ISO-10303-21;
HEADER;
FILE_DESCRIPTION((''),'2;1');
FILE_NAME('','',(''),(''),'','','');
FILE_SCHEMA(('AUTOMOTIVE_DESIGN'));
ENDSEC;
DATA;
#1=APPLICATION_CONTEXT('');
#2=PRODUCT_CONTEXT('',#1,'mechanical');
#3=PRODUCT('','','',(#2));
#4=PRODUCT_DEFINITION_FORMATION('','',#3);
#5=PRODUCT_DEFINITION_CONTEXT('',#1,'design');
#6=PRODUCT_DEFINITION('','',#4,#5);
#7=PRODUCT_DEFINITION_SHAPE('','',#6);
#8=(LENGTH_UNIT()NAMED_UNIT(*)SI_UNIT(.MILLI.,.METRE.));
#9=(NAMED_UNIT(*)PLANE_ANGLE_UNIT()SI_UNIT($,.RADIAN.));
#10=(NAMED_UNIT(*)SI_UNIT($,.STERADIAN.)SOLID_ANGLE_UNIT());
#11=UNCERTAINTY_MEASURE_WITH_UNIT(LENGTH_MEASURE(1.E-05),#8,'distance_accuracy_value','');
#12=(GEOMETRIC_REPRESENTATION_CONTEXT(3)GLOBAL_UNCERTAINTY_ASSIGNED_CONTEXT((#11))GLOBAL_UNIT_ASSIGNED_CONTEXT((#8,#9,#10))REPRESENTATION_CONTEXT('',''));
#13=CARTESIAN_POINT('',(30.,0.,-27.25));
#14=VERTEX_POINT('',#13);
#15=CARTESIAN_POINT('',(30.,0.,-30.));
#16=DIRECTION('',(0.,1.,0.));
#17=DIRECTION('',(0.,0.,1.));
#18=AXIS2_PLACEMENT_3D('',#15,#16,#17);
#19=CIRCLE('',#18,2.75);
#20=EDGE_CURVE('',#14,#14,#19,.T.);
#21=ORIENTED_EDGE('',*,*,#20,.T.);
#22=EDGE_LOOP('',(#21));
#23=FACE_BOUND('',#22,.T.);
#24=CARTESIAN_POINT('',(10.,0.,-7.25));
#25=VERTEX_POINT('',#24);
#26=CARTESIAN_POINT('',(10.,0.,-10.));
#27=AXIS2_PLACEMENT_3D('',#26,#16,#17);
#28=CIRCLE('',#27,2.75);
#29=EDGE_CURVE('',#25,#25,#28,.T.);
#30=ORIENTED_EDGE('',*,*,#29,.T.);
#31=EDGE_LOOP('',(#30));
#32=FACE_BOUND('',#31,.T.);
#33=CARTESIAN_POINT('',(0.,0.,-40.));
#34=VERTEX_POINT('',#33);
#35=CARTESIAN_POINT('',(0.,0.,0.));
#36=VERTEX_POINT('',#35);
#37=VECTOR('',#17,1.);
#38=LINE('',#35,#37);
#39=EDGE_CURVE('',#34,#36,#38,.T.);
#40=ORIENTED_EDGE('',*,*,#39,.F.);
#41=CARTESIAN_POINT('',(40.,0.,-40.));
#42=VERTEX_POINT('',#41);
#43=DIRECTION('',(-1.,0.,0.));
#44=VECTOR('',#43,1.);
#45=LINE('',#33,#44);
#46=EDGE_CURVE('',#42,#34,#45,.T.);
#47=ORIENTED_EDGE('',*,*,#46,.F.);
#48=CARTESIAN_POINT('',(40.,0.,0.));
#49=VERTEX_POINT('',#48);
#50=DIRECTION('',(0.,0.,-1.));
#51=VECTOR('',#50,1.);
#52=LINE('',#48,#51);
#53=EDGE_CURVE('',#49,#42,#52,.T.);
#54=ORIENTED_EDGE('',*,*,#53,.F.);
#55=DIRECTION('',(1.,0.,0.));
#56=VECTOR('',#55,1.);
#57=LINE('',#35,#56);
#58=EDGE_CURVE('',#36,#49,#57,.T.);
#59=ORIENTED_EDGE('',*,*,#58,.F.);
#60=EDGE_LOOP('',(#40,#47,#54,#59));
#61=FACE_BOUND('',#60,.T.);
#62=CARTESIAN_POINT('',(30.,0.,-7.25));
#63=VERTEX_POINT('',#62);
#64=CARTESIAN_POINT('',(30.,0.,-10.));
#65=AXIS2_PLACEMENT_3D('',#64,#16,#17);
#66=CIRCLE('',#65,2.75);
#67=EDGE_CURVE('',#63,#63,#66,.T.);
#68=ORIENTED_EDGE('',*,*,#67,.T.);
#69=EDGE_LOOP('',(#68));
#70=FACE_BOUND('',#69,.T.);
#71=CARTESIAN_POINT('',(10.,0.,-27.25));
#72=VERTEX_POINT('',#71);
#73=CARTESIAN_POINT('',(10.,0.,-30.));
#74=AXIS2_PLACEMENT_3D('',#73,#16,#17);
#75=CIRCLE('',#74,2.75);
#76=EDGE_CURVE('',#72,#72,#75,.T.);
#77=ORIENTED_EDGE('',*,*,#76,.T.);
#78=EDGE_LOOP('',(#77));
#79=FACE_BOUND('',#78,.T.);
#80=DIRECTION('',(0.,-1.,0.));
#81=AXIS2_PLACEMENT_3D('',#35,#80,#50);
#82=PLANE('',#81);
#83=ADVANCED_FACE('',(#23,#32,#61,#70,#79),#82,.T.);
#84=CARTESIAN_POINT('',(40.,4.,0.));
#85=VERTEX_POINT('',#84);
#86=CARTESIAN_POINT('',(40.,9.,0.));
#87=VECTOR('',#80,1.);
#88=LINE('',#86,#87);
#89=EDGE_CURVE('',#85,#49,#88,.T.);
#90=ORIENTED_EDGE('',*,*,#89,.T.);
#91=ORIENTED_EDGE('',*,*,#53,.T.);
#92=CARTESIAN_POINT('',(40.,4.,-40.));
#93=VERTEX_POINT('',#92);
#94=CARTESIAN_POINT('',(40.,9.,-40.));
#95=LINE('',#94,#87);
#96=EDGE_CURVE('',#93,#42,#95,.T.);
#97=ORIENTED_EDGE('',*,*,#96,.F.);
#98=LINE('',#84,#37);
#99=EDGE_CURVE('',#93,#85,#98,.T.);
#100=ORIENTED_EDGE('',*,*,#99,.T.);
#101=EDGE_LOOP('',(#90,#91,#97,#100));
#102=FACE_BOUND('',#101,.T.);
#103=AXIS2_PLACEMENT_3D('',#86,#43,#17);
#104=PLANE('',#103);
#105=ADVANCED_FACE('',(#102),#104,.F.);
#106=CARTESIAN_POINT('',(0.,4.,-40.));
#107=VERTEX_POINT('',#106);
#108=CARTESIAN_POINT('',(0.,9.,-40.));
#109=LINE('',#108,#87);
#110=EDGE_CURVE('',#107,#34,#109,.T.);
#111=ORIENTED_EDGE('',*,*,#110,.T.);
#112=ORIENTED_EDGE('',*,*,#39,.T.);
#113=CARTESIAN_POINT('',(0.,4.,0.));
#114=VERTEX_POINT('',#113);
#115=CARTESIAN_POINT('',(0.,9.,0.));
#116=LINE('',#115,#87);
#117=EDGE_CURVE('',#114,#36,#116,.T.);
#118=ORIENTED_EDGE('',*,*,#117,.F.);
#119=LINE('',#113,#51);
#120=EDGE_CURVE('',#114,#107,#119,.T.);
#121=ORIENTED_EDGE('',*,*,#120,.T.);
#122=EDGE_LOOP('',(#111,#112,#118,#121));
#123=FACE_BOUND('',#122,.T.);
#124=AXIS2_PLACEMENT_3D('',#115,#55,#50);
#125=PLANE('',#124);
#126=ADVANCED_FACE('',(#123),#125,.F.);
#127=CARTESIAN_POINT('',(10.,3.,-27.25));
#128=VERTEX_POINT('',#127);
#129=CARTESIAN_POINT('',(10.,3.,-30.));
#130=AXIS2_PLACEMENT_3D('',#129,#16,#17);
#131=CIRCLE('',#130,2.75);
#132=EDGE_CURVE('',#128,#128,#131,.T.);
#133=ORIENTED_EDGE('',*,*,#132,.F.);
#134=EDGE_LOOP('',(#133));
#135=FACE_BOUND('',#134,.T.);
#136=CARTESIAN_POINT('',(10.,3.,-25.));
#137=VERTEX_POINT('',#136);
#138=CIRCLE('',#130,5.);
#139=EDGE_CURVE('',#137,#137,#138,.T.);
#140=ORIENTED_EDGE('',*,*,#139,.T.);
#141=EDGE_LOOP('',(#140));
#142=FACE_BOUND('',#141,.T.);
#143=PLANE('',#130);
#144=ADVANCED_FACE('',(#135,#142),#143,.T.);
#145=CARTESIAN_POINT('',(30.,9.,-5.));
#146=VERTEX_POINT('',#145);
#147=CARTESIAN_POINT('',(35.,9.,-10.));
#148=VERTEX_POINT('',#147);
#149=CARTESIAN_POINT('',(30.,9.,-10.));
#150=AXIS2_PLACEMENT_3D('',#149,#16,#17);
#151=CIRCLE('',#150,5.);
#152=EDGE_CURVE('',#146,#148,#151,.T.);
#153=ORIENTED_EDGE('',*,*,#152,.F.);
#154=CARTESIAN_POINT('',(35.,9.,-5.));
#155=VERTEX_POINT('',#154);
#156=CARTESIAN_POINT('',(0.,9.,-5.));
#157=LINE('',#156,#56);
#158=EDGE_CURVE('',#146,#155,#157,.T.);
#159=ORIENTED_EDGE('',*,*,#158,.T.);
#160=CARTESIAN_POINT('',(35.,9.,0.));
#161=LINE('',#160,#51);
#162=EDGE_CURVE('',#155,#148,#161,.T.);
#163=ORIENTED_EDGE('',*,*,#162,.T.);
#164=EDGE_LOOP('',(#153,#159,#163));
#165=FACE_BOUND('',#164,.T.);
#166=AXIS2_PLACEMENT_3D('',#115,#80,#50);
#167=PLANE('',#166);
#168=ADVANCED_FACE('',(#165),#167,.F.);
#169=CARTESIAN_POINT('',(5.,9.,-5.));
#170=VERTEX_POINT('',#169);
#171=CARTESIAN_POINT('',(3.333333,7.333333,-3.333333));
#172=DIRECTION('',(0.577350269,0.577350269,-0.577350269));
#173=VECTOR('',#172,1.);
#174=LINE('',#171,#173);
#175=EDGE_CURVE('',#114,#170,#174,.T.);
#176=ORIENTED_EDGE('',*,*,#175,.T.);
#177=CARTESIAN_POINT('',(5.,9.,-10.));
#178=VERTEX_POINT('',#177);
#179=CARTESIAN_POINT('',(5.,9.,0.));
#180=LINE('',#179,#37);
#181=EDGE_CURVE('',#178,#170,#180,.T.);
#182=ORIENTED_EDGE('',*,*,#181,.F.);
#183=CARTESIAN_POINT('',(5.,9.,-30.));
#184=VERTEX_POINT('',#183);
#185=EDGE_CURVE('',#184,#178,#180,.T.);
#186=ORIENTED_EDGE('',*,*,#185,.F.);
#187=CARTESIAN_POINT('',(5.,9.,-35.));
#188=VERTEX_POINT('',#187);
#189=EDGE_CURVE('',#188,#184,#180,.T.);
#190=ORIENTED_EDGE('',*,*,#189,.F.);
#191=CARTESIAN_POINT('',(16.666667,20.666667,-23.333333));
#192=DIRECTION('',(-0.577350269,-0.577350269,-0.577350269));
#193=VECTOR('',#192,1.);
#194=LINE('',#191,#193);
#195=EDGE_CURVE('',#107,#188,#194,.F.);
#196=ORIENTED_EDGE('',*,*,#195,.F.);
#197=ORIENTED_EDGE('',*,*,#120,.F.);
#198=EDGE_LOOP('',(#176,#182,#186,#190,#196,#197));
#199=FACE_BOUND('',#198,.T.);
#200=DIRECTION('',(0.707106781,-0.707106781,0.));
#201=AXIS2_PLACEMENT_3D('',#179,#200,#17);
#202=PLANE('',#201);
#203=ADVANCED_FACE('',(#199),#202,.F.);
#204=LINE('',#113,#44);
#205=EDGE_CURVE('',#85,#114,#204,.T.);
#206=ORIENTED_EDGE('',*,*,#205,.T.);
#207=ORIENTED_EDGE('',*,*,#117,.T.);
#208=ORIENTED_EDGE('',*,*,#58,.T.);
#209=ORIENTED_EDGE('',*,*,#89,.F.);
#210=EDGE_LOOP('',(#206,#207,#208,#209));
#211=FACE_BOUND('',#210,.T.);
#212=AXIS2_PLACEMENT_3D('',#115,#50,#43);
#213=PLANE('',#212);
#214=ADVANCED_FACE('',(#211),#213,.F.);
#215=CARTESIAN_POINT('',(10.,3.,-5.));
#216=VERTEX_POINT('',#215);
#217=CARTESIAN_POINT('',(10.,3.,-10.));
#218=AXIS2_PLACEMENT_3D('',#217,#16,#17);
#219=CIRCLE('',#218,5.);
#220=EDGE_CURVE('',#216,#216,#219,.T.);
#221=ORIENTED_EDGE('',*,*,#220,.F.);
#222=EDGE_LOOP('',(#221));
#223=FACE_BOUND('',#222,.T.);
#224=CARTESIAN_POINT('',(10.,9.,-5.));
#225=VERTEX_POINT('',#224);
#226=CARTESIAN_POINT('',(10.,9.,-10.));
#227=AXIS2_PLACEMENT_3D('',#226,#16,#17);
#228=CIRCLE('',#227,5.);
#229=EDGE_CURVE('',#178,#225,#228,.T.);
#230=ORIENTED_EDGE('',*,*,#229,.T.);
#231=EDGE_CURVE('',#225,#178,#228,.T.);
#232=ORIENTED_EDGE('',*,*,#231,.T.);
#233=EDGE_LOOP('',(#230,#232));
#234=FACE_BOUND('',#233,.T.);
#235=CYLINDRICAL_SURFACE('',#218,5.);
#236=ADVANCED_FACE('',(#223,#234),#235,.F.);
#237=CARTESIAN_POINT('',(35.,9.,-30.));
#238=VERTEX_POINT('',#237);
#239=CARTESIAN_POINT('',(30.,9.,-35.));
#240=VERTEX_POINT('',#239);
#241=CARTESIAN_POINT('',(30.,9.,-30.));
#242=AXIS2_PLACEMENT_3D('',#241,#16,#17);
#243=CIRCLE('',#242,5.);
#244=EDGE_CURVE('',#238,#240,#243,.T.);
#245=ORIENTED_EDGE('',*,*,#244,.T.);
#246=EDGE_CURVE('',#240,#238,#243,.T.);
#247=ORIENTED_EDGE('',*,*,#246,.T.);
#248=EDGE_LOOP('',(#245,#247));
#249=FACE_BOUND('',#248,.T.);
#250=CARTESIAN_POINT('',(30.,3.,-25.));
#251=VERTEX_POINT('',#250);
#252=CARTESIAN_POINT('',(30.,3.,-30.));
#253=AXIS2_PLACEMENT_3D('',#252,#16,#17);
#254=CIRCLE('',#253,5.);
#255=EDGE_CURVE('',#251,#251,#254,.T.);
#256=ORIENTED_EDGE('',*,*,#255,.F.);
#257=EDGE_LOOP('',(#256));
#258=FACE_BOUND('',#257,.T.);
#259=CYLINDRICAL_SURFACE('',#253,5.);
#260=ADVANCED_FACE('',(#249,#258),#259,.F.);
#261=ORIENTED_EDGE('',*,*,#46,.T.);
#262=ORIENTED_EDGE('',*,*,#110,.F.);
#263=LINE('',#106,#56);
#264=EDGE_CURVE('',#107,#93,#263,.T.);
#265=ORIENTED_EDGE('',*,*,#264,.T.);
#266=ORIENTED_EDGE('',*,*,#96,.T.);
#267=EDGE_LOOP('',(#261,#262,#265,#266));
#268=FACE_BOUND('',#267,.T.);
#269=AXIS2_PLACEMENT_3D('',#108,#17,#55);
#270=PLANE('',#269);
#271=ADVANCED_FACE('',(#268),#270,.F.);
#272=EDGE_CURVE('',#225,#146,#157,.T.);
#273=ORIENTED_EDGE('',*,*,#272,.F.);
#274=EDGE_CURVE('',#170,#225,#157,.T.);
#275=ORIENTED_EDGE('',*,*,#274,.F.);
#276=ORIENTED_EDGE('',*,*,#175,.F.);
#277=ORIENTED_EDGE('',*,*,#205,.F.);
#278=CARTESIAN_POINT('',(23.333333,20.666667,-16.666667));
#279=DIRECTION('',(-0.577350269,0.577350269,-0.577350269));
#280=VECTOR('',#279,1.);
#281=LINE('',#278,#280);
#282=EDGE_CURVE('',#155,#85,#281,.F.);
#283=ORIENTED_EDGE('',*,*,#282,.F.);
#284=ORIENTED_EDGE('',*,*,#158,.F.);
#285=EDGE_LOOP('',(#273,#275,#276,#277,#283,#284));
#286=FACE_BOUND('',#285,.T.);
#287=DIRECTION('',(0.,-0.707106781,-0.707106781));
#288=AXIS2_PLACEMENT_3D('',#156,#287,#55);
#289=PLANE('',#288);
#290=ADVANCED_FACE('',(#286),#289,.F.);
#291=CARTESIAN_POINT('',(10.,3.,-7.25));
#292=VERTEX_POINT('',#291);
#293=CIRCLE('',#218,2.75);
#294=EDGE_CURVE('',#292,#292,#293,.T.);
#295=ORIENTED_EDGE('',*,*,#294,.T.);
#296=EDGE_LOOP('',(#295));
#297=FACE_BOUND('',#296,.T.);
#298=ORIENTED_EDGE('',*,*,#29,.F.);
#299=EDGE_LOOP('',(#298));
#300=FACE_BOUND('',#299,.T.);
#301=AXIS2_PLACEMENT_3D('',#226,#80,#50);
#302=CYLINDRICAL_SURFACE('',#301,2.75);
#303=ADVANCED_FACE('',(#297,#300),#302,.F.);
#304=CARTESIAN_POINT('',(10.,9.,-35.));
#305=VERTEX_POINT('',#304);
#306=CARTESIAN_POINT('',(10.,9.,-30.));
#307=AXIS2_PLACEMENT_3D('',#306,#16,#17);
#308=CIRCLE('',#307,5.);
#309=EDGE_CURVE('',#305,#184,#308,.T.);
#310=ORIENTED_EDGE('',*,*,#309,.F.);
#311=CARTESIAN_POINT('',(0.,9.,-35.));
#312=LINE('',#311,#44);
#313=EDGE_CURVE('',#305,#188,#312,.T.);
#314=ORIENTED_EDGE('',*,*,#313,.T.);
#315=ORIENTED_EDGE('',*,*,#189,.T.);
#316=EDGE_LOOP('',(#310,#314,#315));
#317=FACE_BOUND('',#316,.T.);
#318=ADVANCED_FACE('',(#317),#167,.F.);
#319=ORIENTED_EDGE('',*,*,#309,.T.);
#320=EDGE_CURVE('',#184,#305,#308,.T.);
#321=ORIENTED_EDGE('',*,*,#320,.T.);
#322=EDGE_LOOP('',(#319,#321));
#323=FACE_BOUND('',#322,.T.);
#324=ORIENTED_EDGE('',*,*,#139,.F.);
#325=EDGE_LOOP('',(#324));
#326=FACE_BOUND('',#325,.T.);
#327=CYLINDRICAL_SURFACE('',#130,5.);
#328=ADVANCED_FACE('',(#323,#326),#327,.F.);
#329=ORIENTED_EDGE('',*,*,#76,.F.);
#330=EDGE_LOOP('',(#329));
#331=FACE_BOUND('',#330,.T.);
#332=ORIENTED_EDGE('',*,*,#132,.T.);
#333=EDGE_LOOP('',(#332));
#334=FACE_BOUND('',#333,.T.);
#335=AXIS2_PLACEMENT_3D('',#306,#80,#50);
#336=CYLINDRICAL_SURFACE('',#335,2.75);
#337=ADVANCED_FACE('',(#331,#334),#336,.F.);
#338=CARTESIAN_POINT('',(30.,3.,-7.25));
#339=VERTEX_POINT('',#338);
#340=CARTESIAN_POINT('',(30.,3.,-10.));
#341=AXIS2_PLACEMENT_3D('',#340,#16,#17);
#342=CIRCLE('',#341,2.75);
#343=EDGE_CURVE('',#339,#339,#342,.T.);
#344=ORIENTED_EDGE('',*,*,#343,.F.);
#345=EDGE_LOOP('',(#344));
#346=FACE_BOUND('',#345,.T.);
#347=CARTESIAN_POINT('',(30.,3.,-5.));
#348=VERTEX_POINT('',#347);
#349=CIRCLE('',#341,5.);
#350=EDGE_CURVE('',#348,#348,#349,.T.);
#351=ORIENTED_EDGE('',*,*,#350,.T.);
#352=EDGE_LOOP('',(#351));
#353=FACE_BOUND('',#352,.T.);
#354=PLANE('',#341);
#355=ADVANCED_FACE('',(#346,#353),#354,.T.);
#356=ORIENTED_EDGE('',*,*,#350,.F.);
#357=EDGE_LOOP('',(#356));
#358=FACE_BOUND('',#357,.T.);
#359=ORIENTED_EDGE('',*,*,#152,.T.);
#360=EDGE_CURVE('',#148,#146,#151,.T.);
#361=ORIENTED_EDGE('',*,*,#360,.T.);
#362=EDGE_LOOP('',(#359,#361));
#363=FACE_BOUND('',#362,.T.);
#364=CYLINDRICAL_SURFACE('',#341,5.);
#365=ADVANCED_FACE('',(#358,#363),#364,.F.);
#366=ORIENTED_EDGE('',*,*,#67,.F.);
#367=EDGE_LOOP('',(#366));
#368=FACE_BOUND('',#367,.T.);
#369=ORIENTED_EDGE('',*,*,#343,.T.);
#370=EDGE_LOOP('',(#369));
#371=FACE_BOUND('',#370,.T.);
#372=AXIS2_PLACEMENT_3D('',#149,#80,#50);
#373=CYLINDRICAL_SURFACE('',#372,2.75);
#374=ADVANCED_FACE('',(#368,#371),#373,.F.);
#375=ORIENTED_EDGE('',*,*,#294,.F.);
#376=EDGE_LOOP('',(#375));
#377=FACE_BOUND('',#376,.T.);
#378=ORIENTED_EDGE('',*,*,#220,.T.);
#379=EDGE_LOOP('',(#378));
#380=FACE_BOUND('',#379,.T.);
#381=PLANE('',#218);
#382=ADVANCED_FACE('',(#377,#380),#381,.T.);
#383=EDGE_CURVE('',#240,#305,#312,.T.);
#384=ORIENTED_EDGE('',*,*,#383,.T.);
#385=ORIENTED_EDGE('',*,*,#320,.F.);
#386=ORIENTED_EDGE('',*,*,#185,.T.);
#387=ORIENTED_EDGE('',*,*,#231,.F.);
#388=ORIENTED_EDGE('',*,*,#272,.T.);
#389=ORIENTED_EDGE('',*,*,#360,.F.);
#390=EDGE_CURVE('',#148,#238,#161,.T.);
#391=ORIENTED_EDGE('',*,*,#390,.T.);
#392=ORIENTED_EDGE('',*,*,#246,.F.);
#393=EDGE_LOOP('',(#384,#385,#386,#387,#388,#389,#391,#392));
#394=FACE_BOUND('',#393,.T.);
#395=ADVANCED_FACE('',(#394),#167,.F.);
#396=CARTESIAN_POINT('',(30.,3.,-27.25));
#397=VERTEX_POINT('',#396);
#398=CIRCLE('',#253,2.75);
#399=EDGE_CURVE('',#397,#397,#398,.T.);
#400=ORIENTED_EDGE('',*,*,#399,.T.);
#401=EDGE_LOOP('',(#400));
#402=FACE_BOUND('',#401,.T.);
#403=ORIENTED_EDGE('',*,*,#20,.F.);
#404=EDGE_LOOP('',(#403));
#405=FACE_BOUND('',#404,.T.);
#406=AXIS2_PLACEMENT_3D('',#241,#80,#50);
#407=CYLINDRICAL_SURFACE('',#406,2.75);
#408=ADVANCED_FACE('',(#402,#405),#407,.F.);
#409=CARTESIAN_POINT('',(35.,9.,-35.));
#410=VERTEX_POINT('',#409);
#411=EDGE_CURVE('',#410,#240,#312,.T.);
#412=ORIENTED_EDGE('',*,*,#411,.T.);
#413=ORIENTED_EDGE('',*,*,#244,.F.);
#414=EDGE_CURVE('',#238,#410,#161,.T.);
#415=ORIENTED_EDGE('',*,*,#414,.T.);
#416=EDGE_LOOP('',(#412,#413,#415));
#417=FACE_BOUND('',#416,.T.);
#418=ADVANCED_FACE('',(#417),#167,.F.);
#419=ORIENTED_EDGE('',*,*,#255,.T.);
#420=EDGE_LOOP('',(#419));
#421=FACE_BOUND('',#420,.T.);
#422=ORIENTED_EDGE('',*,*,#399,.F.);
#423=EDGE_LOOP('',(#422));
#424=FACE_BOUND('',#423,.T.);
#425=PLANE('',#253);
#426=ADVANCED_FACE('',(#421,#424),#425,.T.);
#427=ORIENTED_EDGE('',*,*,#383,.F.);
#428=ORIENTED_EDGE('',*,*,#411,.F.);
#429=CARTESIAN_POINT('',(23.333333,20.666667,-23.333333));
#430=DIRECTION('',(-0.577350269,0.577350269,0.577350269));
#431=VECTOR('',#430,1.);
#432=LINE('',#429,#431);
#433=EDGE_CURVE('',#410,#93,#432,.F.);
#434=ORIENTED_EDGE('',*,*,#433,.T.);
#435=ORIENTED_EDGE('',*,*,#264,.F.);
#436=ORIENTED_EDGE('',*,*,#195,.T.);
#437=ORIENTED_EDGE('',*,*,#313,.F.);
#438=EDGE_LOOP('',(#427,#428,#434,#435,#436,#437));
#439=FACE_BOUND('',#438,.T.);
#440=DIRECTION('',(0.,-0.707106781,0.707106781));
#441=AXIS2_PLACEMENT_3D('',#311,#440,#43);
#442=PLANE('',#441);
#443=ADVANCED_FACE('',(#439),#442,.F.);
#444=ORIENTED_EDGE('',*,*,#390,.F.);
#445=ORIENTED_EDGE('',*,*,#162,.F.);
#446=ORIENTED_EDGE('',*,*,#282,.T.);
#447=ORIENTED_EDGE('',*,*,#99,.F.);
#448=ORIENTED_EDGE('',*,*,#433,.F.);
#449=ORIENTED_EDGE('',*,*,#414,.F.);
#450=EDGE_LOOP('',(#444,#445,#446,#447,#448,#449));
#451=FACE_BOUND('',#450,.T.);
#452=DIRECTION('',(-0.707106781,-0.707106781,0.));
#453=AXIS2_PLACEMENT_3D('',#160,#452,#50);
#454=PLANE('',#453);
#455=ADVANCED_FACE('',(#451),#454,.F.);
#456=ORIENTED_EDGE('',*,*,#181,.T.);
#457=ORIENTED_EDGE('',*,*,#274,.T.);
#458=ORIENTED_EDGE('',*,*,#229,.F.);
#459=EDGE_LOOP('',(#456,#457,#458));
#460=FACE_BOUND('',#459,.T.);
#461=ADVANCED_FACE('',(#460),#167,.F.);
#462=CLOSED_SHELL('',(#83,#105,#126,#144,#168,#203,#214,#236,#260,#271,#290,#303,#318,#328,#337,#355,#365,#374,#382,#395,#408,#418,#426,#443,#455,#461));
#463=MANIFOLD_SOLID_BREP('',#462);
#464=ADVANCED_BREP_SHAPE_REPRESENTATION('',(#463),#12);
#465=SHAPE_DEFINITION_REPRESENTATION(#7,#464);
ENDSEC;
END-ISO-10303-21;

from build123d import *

# Parameters (mm, degrees)
SKETCH1_W           = 40
SKETCH1_H           = 40
SKETCH1_R           = 2.75
BOSS_EXTRUDE1_DEPTH = 9
SKETCH2_R           = 5
CUT_EXTRUDE1_DEPTH  = 6
CHAMFER1_SIZE       = 5


with BuildPart() as part:
    # Sketch1 → Boss-Extrude1 (new body)
    with BuildSketch(Plane(origin=(0, 0, 0), x_dir=(1, 0, 0), z_dir=(0, 1, 0))):
        with Locations((20, 20)):
            Rectangle(SKETCH1_W, SKETCH1_H)
        with Locations(Location((10, 30, 0), (0, 0, 270))):
            Circle(SKETCH1_R, mode=Mode.SUBTRACT)
        with Locations(Location((30, 30, 0), (0, 0, 270))):
            Circle(SKETCH1_R, mode=Mode.SUBTRACT)
        with Locations(Location((30, 10, 0), (0, 0, 270))):
            Circle(SKETCH1_R, mode=Mode.SUBTRACT)
        with Locations(Location((10, 10, 0), (0, 0, 270))):
            Circle(SKETCH1_R, mode=Mode.SUBTRACT)
    extrude(amount=BOSS_EXTRUDE1_DEPTH)

    # Sketch2 → Cut-Extrude1 (cut)
    with BuildSketch(Plane(origin=(0, 9, 0), x_dir=(1, 0, 0), z_dir=(0, 1, 0))):
        with Locations(Location((10, 10, 0), (0, 0, 270))):
            Circle(SKETCH2_R)
        with Locations(Location((30, 10, 0), (0, 0, 270))):
            Circle(SKETCH2_R)
        with Locations(Location((30, 30, 0), (0, 0, 270))):
            Circle(SKETCH2_R)
        with Locations(Location((10, 30, 0), (0, 0, 270))):
            Circle(SKETCH2_R)
    extrude(amount=-CUT_EXTRUDE1_DEPTH, mode=Mode.SUBTRACT)

    # Chamfer1
    chamfer1_edges = [part.edges().sort_by_distance(p)[0] for p in [
        (40, 9, -20),
        (20, 9, -40),
        (0, 9, -20),
        (20, 9, 0),
    ]]
    chamfer(chamfer1_edges, length=CHAMFER1_SIZE - 0.0001)  # a hair under: the kernel refuses the full size


solid = part.part
